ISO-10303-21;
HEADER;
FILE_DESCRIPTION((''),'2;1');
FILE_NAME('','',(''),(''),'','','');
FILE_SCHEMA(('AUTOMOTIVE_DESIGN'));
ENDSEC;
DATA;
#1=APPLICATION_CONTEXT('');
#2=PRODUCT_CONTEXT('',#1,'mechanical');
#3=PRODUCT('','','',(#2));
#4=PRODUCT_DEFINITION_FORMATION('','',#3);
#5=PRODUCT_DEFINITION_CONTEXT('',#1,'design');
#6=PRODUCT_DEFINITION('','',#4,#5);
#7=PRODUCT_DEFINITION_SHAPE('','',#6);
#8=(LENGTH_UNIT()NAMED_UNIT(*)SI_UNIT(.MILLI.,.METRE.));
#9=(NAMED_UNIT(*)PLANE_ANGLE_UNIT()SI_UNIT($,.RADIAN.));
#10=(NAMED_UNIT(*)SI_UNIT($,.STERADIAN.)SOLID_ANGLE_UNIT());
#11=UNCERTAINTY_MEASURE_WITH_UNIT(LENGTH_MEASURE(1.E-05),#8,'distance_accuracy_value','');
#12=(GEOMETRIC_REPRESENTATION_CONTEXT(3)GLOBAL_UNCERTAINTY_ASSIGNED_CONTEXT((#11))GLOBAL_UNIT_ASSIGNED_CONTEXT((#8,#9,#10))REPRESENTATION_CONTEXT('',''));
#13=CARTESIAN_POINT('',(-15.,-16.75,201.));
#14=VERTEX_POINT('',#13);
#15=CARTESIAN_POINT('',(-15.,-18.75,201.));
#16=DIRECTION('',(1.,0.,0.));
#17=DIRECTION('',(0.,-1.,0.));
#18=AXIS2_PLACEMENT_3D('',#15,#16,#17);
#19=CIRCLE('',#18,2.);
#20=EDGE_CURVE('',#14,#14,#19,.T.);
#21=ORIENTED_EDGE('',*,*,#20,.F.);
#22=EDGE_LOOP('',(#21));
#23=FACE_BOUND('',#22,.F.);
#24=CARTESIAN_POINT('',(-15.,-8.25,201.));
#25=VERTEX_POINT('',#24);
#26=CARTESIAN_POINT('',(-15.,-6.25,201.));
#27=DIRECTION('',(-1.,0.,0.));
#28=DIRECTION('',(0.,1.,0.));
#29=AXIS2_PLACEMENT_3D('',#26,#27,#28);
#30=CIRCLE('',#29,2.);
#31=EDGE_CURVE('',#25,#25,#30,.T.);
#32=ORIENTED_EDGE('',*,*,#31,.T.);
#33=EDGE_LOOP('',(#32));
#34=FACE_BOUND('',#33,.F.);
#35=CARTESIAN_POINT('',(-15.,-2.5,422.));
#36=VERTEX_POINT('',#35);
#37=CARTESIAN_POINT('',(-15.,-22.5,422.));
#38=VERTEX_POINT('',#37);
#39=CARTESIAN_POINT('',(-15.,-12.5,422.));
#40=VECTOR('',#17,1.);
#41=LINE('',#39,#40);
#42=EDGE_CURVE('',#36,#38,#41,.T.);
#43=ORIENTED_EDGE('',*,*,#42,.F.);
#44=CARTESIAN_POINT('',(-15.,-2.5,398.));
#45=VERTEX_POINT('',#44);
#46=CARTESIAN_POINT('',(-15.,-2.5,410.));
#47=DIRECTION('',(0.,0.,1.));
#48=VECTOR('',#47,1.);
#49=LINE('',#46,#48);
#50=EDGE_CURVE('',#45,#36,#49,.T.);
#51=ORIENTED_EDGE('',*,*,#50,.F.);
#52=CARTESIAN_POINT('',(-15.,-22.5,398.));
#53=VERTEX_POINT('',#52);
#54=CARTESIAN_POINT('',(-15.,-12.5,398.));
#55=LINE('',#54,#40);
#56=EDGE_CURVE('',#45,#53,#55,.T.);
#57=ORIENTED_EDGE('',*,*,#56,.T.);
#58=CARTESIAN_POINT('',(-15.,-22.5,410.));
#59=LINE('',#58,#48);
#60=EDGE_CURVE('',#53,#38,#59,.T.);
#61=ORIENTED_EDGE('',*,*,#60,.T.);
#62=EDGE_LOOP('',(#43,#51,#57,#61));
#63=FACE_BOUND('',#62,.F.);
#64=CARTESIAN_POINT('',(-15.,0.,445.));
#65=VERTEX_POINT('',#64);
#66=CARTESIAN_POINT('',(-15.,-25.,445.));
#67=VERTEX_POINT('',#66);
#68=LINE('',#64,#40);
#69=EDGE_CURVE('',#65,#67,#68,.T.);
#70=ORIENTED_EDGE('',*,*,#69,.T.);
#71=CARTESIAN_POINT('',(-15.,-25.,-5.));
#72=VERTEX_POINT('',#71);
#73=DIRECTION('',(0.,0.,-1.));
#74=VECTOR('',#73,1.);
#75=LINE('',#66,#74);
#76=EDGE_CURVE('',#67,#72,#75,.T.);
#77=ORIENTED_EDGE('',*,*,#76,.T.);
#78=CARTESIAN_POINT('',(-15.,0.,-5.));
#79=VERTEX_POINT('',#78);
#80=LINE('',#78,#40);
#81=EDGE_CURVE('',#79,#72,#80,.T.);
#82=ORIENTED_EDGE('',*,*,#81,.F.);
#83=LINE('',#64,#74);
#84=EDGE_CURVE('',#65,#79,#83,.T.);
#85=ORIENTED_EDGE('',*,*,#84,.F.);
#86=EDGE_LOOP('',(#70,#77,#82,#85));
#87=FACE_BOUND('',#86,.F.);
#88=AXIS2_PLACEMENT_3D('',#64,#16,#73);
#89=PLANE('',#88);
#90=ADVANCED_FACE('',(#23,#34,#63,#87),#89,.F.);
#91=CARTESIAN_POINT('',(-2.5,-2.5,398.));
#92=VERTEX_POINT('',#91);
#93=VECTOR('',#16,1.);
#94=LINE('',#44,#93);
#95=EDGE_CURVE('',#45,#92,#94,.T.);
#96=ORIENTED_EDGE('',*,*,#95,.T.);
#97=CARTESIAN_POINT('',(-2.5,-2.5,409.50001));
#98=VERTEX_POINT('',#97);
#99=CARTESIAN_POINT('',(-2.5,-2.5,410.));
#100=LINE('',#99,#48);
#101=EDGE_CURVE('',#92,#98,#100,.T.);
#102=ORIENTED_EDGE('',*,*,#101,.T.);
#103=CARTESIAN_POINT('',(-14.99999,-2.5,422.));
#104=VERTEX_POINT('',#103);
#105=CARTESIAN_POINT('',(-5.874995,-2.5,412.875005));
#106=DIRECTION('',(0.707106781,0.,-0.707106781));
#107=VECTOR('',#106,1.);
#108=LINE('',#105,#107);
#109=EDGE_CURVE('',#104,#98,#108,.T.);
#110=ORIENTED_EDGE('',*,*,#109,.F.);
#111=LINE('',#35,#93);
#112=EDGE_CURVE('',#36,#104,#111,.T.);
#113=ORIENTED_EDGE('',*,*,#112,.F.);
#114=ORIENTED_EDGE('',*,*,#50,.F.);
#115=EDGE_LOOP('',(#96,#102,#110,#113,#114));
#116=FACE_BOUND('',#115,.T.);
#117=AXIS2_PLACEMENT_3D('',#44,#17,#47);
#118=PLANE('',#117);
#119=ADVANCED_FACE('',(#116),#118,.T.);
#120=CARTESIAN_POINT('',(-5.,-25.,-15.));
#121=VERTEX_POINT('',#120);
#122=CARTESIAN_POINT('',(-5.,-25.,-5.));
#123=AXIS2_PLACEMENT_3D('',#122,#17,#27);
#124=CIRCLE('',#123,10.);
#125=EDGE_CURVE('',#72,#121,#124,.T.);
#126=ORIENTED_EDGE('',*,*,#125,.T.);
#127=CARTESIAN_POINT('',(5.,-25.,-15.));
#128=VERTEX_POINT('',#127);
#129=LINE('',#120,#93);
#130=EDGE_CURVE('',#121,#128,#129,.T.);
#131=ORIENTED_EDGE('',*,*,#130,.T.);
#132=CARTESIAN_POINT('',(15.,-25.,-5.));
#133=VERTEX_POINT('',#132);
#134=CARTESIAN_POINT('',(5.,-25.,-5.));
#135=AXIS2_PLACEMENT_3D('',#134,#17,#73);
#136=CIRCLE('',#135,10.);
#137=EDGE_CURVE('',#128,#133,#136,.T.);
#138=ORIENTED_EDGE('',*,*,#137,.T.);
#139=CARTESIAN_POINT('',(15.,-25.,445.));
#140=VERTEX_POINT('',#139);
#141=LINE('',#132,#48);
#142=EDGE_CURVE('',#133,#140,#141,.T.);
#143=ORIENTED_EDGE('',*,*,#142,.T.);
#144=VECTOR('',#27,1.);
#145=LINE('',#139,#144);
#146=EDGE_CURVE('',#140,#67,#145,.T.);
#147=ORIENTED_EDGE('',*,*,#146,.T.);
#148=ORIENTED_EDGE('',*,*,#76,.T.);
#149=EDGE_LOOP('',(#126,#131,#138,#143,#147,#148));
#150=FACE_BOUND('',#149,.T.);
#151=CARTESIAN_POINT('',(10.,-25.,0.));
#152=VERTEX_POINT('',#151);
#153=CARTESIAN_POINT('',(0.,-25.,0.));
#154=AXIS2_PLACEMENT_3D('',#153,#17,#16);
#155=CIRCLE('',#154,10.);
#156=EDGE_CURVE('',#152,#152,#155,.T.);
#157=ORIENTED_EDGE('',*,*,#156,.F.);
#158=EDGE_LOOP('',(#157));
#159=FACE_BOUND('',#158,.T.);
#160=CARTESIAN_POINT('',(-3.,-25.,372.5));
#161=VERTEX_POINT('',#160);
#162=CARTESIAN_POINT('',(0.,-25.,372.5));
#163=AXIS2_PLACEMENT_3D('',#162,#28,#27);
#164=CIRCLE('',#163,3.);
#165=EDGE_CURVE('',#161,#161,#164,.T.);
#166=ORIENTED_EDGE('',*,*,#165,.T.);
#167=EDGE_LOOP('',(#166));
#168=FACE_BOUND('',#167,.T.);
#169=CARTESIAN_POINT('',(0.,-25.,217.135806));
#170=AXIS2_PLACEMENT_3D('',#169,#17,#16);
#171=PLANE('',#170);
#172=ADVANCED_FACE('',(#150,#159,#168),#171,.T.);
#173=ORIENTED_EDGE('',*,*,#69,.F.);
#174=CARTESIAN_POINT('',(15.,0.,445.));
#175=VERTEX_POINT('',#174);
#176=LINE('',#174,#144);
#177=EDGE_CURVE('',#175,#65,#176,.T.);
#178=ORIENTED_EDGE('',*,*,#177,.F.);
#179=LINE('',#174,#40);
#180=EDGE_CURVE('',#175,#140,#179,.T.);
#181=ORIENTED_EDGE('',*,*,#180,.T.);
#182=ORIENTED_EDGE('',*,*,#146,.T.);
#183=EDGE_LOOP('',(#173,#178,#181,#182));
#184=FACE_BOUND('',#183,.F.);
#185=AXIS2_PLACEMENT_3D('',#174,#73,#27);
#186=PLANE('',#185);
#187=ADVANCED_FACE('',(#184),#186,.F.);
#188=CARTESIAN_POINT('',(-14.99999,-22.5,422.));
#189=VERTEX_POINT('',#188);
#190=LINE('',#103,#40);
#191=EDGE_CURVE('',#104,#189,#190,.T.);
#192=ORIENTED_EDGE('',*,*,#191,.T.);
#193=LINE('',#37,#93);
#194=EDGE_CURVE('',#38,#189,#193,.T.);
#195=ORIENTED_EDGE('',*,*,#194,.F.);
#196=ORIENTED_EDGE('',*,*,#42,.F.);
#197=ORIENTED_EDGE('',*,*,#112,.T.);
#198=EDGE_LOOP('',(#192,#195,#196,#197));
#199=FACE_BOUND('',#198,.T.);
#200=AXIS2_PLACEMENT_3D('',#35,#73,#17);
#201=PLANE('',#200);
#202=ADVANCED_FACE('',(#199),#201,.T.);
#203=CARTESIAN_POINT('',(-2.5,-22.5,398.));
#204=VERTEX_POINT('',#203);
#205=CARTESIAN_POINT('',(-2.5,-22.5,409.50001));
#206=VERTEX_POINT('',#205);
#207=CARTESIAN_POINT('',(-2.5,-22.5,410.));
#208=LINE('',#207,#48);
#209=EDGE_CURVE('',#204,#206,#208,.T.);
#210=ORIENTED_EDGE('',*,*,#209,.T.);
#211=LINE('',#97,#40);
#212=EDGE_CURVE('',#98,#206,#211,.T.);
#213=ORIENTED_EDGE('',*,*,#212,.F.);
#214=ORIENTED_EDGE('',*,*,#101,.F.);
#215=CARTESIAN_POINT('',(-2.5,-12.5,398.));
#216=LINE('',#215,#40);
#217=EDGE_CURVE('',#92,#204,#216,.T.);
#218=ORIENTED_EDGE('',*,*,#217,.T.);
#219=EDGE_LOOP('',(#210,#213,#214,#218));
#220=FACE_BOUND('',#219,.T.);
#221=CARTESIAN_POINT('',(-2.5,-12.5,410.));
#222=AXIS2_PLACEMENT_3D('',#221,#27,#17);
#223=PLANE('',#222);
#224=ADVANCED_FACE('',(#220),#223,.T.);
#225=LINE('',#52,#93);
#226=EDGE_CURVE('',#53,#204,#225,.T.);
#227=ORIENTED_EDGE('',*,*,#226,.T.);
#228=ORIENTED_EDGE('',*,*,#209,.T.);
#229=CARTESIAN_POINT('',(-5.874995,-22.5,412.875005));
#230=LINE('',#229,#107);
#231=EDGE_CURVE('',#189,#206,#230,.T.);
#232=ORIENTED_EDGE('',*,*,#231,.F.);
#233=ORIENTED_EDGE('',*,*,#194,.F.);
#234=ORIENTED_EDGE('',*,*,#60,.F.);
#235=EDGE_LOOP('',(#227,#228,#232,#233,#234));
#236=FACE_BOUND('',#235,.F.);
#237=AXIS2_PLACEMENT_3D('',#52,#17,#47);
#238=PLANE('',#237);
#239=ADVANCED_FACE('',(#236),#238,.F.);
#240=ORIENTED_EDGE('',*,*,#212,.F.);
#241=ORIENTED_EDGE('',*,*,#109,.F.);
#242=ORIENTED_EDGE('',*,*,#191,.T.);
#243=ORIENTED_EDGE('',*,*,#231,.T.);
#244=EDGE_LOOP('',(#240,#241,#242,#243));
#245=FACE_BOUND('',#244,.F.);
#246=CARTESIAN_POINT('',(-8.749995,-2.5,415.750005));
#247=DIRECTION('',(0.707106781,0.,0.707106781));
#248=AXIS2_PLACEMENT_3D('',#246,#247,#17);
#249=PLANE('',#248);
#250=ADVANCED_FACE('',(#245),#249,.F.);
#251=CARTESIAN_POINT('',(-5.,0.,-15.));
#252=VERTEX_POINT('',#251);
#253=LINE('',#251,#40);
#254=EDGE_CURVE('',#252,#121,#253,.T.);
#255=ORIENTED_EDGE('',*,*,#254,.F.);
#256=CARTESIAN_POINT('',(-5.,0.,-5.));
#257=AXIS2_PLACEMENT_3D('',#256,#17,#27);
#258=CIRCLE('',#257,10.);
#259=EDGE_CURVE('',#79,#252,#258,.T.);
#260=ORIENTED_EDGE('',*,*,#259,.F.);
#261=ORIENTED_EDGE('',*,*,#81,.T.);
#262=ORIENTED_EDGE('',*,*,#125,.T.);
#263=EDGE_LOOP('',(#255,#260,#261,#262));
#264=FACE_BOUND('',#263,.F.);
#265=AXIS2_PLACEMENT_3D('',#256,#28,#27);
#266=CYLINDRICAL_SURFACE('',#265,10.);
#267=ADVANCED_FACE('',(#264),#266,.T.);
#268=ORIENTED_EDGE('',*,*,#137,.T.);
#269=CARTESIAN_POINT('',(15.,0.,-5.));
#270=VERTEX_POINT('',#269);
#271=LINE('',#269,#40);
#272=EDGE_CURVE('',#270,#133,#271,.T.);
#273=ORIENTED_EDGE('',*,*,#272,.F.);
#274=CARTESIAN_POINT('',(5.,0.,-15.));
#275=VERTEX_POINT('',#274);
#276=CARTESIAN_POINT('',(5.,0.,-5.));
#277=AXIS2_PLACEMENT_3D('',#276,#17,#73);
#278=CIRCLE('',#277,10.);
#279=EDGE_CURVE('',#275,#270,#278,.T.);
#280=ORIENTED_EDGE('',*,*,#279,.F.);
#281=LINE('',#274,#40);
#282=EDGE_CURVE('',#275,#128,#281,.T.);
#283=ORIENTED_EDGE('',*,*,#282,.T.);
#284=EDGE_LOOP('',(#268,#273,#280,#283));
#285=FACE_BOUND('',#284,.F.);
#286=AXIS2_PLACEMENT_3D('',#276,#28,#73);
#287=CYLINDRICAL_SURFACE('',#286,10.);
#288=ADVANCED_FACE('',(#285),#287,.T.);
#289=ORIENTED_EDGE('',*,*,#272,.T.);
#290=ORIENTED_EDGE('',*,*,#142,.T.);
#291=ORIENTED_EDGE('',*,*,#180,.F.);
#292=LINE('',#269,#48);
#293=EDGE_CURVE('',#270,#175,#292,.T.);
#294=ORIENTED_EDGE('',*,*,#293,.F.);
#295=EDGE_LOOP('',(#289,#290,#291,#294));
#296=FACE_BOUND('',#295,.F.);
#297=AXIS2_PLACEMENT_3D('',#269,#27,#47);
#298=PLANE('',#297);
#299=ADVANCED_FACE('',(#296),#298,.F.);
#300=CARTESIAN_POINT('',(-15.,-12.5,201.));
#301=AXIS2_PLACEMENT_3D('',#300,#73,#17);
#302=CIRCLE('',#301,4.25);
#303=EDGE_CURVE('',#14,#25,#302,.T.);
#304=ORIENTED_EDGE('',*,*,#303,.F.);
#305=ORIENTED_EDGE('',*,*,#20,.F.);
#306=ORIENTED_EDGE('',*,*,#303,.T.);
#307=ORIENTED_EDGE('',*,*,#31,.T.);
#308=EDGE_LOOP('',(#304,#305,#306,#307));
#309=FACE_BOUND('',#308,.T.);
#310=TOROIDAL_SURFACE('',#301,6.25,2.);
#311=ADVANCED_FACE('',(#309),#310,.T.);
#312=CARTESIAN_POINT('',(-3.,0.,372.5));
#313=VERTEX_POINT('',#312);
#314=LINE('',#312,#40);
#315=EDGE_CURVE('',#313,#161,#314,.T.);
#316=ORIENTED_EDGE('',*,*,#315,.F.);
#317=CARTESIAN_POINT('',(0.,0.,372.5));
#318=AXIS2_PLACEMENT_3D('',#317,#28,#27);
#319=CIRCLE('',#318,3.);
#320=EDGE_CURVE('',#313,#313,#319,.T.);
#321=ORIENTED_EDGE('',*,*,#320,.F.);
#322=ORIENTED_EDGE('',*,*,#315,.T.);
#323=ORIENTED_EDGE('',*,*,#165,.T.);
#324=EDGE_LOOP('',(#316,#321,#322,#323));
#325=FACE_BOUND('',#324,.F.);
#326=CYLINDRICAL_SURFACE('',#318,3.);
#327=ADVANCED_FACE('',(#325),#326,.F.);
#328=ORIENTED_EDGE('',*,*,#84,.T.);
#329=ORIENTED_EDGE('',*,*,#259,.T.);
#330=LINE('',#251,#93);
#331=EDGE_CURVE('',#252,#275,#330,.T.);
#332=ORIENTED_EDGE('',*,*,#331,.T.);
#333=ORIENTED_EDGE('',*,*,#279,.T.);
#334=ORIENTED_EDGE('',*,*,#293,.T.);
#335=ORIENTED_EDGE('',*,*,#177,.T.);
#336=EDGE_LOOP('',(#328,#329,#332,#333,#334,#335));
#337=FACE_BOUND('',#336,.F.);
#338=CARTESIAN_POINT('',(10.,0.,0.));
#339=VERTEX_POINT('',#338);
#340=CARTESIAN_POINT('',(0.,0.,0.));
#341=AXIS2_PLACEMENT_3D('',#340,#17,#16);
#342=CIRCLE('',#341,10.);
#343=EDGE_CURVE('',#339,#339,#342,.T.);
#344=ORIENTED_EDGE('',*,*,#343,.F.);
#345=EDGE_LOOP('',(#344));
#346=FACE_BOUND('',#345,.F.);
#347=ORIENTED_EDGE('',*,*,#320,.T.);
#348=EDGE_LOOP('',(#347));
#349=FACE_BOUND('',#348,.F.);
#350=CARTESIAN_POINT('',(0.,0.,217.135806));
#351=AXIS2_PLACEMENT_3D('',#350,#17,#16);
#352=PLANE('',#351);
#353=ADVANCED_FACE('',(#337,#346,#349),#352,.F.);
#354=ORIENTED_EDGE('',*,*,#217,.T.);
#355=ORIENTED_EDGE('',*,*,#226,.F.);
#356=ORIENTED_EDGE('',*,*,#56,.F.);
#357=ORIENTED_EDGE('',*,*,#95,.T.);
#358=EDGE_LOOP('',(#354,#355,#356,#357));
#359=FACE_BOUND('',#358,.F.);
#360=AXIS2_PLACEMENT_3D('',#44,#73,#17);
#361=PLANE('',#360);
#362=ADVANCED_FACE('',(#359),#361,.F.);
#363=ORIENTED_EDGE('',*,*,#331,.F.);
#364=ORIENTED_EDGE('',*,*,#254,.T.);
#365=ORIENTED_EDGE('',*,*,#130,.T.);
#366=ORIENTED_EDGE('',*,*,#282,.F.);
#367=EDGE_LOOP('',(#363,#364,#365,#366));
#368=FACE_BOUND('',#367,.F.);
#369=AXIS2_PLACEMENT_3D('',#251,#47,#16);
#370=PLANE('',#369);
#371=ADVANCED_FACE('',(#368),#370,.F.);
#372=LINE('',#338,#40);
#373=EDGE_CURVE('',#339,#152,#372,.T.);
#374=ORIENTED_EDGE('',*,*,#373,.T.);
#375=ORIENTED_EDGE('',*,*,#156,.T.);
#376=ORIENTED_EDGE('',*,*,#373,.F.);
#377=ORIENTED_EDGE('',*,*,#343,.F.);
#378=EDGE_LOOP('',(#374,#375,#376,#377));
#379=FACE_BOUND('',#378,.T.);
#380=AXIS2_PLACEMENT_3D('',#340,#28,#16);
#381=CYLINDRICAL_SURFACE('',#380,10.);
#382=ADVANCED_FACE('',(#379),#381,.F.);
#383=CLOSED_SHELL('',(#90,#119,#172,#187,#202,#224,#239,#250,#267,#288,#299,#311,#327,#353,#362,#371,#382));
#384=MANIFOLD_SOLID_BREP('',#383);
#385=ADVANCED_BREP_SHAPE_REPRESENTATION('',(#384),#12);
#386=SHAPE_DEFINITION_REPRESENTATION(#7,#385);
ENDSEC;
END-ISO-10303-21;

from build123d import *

# Parameters (mm, degrees)
F0_R      = 10
F1_DEPTH  = 25
F2_W      = 20
F2_H      = 24
F3_DEPTH  = 12.5
F4_SIZE   = 12.49999
F5_R      = 2
F9_R      = 3
F10_DEPTH = 25


# Not quite as in the source:
# - a fillet or chamfer is up to 0.001 mm smaller than in the source, because OpenCascade refuses the exact size


with BuildPart() as f1:
    # F0 (on Front) → F1 (new body)
    with BuildSketch(Plane.XZ):
        with BuildLine():
            ThreePointArc((-15, -5), (-12.0710678119, -12.0710678119), (-5, -15))
            Line((-5, -15), (5, -15))
            ThreePointArc((5, -15), (12.0710678119, -12.0710678119), (15, -5))
            Line((15, -5), (15, 15))
            Line((15, 15), (15, 445))
            Line((15, 445), (-15, 445))
            Line((-15, 445), (-15, 15))
            Line((-15, 15), (-15, -5))
        make_face()
        Circle(F0_R, mode=Mode.SUBTRACT)
    extrude(amount=F1_DEPTH)

    # F2 (on face) → F3 (cut)
    with BuildSketch(Plane(origin=(-15, 0, 0), x_dir=(0, -1, 0), z_dir=(-1, 0, 0))):
        with Locations((12.5, 410)):
            Rectangle(F2_W, F2_H)
    extrude(amount=-F3_DEPTH, mode=Mode.SUBTRACT)

    # F4 (size 12.5 in the source; OpenCascade refuses exactly that, so slightly less here)
    f4_edges = [f1.edges().sort_by_distance(p)[0] for p in [
        (-2.5, -12.5, 422),
    ]]
    chamfer(f4_edges, length=F4_SIZE)

    # F8: sweep along a path in F7
    with BuildLine(Plane.XY.offset(201)) as f8_path:
        ThreePointArc((-15, -18.75), (-21.25, -12.5), (-15, -6.25))
    # F5 (on face) → F8 (sweep)
    with BuildSketch(Plane(origin=(-15, 0, 0), x_dir=(0, -1, 0), z_dir=(-1, 0, 0))):
        with Locations((6.25, 201)):
            Circle(F5_R)
    sweep(path=f8_path.line)

    # F9 (on face) → F10 (cut, through all)
    with BuildSketch(Plane(origin=(0, 0, 0), x_dir=(-1, 0, 0), z_dir=(0, 1, 0))):
        with Locations((0, 372.5)):
            Circle(F9_R)
    extrude(amount=-F10_DEPTH, mode=Mode.SUBTRACT)


solid = f1.part
